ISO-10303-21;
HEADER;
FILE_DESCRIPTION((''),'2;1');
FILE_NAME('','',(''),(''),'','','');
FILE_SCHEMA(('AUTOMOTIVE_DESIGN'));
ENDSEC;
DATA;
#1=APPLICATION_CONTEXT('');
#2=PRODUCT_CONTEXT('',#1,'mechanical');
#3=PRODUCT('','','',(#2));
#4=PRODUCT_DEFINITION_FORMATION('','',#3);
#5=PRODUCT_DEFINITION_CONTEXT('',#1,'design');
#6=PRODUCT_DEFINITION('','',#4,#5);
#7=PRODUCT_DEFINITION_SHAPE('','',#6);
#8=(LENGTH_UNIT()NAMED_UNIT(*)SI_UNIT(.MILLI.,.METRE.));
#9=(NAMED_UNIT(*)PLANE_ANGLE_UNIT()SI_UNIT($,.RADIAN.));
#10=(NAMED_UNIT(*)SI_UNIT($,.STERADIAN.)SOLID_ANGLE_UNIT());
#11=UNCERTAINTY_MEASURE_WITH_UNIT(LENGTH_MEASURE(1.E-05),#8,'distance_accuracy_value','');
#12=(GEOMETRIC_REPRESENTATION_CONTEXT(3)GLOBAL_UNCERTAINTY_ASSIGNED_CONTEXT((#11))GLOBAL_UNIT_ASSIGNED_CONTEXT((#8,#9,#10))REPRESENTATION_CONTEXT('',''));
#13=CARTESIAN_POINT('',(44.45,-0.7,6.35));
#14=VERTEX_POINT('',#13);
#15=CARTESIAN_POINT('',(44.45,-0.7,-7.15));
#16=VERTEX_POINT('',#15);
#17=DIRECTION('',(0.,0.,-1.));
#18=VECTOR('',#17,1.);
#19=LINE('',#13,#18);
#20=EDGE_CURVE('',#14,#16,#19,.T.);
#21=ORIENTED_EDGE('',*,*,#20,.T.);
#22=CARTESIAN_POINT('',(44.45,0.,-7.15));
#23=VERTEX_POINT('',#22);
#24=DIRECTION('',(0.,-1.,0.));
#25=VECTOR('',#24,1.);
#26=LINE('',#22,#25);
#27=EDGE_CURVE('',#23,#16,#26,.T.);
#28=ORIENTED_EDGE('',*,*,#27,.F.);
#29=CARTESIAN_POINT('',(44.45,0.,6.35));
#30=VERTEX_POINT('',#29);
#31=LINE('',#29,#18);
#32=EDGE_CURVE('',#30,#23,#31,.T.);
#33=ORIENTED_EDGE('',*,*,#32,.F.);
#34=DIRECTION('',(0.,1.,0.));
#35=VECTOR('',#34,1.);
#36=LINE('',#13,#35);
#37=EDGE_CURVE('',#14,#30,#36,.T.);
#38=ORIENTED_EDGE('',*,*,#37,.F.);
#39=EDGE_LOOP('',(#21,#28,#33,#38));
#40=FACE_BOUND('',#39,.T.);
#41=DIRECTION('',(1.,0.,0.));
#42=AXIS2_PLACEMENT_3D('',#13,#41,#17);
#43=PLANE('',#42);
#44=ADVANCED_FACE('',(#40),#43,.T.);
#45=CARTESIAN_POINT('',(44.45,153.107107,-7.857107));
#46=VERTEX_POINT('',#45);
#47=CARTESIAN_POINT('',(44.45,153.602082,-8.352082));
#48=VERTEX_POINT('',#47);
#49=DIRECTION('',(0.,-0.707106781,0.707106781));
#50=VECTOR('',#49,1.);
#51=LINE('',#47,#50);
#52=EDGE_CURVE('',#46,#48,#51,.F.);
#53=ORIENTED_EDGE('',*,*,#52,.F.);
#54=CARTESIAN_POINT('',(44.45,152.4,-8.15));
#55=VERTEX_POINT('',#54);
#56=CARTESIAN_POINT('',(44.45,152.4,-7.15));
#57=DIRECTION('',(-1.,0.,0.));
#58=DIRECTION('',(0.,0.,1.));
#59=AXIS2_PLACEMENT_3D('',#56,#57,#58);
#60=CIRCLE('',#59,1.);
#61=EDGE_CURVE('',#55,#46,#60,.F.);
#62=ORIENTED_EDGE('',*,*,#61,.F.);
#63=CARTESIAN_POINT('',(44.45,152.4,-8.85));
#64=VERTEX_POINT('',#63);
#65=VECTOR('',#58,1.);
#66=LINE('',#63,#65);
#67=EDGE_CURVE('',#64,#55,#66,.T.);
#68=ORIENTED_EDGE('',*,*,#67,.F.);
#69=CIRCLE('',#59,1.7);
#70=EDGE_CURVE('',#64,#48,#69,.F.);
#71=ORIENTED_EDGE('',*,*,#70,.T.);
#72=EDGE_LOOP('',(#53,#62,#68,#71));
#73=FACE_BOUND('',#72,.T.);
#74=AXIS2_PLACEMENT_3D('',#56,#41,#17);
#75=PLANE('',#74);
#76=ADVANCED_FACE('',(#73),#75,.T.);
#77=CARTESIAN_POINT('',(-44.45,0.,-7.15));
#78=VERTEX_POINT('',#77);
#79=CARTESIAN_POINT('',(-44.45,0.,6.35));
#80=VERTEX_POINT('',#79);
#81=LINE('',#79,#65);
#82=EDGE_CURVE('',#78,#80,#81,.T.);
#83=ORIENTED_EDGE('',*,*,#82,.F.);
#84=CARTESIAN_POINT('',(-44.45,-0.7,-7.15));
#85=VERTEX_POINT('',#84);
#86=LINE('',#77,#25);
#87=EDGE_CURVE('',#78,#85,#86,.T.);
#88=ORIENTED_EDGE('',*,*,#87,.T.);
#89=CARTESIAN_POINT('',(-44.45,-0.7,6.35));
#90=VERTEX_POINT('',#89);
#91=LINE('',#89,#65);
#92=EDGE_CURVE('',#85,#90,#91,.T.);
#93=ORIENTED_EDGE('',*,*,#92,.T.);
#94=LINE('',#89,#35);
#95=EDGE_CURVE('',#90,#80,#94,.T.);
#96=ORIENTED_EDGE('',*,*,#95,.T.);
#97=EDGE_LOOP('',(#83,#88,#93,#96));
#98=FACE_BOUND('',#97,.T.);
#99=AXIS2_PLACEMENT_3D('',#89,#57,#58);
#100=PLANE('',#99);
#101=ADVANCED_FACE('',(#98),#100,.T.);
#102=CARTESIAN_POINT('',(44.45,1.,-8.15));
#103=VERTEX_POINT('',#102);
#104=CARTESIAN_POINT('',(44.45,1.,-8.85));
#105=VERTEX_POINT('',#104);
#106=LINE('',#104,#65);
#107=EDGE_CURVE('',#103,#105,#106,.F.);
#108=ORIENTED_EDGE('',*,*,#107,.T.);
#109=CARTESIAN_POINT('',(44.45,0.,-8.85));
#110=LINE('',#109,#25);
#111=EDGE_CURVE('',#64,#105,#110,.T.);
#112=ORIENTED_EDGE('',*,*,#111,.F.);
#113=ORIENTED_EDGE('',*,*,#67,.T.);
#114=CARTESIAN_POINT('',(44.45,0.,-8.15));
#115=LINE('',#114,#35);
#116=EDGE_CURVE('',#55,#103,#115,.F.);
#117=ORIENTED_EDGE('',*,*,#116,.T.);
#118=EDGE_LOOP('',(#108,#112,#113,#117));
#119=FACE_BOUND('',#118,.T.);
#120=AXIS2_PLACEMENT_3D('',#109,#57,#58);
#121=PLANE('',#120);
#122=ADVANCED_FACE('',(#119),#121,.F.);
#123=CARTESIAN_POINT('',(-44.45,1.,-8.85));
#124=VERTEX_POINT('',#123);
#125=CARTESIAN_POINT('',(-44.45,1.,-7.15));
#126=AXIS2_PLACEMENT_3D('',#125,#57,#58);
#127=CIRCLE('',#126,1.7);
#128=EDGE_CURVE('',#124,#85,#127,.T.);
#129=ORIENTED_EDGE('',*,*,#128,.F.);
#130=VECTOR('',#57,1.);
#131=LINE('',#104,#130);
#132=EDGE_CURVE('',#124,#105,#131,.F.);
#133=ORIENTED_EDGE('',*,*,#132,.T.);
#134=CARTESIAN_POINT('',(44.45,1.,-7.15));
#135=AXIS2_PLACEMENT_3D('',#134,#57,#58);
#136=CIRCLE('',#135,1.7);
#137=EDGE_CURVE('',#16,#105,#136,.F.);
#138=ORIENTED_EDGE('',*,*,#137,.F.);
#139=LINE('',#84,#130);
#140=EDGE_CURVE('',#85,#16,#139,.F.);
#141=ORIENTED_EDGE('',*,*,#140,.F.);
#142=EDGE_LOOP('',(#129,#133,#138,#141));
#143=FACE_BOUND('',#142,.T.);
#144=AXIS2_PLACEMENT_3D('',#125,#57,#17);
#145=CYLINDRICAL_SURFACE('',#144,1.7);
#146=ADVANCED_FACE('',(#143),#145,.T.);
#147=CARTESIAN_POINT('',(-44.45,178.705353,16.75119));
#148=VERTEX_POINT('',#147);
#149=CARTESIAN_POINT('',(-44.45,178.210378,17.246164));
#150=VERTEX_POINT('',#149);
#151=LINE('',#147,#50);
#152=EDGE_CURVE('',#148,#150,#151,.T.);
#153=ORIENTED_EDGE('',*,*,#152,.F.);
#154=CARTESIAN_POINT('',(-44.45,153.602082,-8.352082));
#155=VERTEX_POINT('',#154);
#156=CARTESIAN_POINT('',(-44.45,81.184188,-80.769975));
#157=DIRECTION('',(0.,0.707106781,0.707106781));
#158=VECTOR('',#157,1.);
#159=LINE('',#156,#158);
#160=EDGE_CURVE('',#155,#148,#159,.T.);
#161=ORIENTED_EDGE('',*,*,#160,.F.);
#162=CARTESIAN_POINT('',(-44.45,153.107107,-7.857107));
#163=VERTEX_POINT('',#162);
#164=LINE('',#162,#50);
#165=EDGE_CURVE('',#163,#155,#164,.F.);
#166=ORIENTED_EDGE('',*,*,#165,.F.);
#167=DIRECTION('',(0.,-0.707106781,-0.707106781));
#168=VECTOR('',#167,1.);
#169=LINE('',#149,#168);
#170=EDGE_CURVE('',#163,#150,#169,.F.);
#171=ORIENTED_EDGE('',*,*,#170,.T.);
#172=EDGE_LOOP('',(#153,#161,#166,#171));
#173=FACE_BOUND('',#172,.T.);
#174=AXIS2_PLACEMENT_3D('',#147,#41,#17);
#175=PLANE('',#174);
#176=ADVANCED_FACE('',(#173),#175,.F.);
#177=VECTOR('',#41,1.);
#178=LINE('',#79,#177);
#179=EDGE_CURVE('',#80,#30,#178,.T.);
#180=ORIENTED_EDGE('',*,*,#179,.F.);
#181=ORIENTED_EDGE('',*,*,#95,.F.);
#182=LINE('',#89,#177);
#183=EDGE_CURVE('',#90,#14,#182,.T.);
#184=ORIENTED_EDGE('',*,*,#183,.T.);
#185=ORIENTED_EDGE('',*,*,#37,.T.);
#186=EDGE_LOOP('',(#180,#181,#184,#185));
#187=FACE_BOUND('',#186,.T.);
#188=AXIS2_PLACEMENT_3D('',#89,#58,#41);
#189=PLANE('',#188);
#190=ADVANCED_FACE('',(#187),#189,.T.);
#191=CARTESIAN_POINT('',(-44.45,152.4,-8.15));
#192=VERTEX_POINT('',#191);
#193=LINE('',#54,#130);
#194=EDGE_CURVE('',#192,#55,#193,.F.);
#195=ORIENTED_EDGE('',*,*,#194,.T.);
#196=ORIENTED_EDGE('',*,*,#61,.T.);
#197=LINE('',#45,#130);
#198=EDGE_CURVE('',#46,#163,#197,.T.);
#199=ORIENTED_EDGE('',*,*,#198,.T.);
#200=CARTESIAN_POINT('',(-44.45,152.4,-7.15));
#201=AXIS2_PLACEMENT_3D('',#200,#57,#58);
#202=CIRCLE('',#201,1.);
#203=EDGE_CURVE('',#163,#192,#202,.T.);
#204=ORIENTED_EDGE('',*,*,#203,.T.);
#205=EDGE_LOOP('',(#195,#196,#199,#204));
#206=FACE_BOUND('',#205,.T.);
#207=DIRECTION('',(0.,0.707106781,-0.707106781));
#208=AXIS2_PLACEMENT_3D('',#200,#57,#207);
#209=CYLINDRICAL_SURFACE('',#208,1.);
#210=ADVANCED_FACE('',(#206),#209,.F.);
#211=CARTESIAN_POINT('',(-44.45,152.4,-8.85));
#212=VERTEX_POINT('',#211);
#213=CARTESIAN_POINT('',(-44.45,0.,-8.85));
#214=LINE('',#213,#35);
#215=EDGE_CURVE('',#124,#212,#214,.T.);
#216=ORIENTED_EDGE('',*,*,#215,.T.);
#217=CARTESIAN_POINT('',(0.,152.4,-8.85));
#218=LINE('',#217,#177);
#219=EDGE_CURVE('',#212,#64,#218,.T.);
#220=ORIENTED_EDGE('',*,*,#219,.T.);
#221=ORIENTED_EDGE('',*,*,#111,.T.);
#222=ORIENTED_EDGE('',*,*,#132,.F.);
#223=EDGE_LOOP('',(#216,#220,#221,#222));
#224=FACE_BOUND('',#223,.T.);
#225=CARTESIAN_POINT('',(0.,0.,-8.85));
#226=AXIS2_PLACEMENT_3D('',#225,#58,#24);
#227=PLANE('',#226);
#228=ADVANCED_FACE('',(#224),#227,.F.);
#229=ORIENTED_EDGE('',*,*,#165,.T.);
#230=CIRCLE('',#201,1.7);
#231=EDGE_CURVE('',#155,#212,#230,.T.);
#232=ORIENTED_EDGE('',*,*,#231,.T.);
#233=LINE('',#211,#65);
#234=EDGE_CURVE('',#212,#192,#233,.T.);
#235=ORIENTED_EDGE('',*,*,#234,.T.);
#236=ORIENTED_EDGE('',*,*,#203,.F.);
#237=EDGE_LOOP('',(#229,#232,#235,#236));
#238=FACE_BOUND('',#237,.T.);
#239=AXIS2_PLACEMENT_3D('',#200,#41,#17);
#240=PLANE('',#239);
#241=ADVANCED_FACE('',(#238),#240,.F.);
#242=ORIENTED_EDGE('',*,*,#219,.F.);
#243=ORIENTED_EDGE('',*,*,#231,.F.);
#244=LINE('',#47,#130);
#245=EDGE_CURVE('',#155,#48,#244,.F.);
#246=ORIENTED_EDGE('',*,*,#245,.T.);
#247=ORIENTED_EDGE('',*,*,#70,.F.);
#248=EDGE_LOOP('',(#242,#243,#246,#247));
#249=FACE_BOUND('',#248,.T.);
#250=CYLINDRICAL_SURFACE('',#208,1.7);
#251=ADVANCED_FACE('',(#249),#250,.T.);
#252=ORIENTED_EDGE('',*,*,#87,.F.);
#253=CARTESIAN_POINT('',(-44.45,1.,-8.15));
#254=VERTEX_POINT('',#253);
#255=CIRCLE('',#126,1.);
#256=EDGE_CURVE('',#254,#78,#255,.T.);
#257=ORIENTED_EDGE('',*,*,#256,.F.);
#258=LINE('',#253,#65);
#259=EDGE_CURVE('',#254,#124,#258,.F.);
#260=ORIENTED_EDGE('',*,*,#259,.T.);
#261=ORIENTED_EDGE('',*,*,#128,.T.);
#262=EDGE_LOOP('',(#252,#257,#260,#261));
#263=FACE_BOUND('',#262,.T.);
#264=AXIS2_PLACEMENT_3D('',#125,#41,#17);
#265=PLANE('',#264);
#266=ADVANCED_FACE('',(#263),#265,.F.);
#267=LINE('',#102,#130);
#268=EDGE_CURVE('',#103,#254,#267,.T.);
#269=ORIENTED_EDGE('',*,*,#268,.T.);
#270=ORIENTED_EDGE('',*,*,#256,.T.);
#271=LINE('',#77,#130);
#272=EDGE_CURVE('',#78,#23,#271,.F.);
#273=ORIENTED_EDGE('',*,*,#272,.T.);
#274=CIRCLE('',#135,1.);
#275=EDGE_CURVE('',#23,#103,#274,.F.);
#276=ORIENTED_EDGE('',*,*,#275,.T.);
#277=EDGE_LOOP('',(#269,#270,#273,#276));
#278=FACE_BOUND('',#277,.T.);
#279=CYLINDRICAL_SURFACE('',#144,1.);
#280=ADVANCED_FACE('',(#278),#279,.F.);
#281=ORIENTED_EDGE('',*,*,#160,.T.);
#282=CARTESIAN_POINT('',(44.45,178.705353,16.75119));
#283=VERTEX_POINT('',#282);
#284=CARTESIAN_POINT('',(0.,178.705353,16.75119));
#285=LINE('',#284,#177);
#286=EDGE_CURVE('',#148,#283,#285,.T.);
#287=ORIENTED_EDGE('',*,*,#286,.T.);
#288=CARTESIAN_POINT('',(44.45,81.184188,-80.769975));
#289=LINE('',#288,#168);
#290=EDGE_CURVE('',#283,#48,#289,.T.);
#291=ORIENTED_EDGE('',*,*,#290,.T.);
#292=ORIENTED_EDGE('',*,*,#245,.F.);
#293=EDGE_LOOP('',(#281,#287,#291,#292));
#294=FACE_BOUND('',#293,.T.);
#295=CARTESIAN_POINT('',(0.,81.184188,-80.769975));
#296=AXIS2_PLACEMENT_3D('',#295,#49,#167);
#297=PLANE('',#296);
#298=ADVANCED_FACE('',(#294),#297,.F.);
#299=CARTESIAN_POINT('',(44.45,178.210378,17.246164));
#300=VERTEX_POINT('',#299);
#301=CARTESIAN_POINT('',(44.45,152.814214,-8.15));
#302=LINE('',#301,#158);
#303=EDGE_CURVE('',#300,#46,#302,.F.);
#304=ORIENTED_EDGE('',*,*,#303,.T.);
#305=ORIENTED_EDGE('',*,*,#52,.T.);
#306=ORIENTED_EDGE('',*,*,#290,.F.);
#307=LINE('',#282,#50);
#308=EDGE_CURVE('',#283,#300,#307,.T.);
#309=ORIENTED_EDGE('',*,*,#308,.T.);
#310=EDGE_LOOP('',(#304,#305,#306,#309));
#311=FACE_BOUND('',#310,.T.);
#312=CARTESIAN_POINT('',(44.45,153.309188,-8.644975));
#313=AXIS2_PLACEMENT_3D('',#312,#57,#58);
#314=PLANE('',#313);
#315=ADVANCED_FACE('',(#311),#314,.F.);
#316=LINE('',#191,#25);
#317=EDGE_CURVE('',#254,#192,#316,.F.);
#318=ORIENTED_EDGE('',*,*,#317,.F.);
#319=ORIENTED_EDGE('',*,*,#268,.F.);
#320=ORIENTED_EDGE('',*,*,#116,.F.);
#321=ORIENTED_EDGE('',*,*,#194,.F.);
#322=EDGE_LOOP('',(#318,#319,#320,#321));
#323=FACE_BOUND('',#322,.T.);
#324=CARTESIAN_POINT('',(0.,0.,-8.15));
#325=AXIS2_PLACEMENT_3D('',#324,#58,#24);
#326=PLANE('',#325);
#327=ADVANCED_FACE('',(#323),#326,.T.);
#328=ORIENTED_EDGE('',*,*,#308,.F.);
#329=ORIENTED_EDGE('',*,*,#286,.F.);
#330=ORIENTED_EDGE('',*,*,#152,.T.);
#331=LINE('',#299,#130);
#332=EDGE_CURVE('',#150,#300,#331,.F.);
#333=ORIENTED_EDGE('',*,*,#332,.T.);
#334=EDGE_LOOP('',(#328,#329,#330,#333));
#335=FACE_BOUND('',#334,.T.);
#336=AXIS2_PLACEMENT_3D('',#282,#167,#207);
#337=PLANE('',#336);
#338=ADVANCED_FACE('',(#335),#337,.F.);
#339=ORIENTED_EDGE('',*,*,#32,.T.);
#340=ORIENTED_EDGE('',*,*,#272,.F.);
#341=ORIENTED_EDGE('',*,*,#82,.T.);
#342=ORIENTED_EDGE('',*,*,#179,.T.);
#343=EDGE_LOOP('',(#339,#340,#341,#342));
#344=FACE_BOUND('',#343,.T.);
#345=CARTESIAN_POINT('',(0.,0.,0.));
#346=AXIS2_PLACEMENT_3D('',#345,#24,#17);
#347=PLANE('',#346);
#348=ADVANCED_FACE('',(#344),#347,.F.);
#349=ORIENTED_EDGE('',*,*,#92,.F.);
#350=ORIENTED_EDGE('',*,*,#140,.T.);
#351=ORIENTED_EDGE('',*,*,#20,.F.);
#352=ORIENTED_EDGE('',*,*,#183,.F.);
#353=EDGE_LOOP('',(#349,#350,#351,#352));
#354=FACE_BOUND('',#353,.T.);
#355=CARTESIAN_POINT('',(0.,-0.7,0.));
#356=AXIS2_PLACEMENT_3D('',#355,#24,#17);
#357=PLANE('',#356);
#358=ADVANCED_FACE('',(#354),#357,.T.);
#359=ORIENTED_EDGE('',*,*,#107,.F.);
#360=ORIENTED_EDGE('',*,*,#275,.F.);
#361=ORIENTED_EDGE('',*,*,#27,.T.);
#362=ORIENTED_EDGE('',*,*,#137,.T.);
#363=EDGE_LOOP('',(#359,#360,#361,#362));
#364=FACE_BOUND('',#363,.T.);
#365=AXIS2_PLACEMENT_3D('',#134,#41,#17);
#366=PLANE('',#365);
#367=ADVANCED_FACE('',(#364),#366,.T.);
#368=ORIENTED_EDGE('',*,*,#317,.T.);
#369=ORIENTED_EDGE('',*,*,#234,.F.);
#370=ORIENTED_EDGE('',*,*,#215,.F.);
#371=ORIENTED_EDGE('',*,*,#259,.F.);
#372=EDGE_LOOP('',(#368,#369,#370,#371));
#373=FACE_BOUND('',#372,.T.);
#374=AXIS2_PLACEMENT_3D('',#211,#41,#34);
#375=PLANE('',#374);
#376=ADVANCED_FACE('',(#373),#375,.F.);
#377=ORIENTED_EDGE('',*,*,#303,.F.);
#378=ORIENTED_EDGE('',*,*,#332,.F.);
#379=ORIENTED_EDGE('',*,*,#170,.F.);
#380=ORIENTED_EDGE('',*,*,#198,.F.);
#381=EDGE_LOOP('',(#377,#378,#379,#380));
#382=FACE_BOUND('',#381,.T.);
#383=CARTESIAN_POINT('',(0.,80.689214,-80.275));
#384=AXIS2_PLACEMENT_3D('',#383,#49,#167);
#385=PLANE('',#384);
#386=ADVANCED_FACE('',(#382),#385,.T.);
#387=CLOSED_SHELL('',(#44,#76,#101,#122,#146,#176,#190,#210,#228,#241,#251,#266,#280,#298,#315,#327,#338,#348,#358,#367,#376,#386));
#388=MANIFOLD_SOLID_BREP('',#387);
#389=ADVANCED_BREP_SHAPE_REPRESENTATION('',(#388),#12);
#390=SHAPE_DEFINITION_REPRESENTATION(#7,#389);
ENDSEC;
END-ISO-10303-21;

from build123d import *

# Parameters (mm, degrees)
SKETCH1_W          = 88.9
SKETCH1_H          = 12.7
BASE_FLANGE1_DEPTH = 0.7
EDGE_FLANGE1_DEPTH = 88.9
EDGE_FLANGE2_DEPTH = 88.9


# Sheet-metal steps are written as plain solids
with BuildPart() as part:
    # Sketch1 → Base-Flange1 (new body)
    with BuildSketch(Plane(origin=(0, 0, 0), x_dir=(1, 0, 0), z_dir=(0, 1, 0))):
        Rectangle(SKETCH1_W, SKETCH1_H)
    extrude(amount=-BASE_FLANGE1_DEPTH)

    # Edge-Flange1 section (across the edge) → Edge-Flange1 (add)
    with BuildSketch(Plane(origin=(44.45, 0, -8.15), x_dir=(0, 0, 1), z_dir=(-1, 0, 0))):
        with BuildLine():
            Line((-0.7, 1), (-0.7, 152.4))
            Line((-0.7, 152.4), (0, 152.4))
            Line((0, 152.4), (0, 1))
            ThreePointArc((0, 1), (0.292893219, 0.292893219), (1, 0))
            Line((1, 0), (1.8, 0))
            Line((1.8, 0), (1.8, -0.7))
            Line((1.8, -0.7), (1, -0.7))
            ThreePointArc((1, -0.7), (-0.202081528, -0.202081528), (-0.7, 1))
        make_face()
    extrude(amount=EDGE_FLANGE1_DEPTH)

    # Edge-Flange2 section (across the edge) → Edge-Flange2 (add)
    with BuildSketch(Plane(origin=(44.45, 152.814213562, -8.15), x_dir=(0, -0.7071067811865414, 0.7071067811865537), z_dir=(-1, 0, 0))):
        with BuildLine():
            Line((-0.7, 0.414213562), (-0.7, 35.9156))
            Line((-0.7, 35.9156), (0, 35.9156))
            Line((0, 35.9156), (0, 0.414213562))
            ThreePointArc((0, 0.414213562), (0.076120467, 0.03153013), (0.292893219, -0.292893219))
            Line((0.292893219, -0.292893219), (-0.202081528, -0.787867966))
            ThreePointArc((-0.202081528, -0.787867966), (-0.570595205, -0.236348273), (-0.7, 0.414213562))
        make_face()
    extrude(amount=EDGE_FLANGE2_DEPTH)


solid = part.part
